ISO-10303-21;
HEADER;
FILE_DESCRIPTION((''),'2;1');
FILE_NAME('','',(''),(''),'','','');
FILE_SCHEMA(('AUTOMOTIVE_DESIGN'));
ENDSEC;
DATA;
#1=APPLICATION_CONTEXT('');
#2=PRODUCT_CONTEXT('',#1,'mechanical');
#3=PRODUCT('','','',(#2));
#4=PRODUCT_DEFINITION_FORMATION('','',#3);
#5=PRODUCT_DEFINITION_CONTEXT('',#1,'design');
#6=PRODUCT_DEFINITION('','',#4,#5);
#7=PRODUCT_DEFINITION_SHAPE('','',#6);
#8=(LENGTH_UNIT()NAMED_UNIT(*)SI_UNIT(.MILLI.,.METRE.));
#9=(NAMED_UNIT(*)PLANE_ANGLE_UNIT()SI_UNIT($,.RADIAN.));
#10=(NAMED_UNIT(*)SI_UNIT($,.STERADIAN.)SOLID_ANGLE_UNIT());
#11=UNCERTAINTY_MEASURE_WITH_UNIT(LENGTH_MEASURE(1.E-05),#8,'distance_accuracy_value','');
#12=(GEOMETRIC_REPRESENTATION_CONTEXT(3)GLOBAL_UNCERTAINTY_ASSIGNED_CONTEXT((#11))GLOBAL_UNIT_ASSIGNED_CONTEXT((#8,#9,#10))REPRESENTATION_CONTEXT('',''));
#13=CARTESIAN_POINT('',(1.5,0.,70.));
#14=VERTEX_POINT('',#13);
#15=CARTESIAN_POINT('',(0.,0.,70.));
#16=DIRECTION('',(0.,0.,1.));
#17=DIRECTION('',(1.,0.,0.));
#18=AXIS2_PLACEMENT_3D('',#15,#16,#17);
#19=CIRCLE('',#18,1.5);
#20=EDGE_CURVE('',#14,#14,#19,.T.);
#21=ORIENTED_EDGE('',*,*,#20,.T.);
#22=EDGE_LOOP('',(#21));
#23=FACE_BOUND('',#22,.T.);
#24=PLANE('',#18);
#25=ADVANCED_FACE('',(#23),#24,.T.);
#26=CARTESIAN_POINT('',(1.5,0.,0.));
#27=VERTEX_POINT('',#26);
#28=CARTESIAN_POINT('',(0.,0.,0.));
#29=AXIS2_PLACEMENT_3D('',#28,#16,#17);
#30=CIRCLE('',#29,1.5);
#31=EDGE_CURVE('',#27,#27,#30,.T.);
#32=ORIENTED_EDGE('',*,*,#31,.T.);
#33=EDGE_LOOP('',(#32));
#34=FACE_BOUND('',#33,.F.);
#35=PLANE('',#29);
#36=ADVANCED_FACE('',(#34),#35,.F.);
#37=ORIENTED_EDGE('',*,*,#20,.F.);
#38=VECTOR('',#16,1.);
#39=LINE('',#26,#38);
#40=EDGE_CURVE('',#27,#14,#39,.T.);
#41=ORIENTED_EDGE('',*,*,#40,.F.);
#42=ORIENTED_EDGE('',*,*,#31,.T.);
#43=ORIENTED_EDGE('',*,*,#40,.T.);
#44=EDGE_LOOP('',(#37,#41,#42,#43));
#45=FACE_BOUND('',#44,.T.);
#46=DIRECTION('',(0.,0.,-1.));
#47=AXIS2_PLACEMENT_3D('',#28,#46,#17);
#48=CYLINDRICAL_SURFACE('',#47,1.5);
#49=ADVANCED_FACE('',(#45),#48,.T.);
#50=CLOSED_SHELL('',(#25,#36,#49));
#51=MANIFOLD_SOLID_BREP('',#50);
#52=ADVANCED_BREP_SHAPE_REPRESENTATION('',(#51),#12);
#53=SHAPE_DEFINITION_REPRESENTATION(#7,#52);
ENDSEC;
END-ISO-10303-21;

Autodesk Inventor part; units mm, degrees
ref_plane "YZ Plane" through (0, 0, 0) normal (1, 0, 0) x (0, 1, 0)
ref_plane "XZ Plane" through (0, 0, 0) normal (0, 1, 0) x (-1, 0, 0)
ref_plane "XY Plane" through (0, 0, 0) normal (0, 0, 1) x (1, 0, 0)
sketch "Szkic1" plane through (0, 0, 0) normal (0, 0, 1) x (1, 0, 0)
  circle A0 centre (0, 0) radius 1.5
  dimension "d0" = 3
extrude "Wyciągnięcie proste1" add sketch "Szkic1" along normal blind 70
thread "Gwint3" size "M3x0.5" class "6g" standard "ANSI Metric M Profile" length 10
thread "Gwint4" size "M3x0.5" class "6g" standard "ANSI Metric M Profile" length 10
properties part number "mocowanie_kolek_2"
